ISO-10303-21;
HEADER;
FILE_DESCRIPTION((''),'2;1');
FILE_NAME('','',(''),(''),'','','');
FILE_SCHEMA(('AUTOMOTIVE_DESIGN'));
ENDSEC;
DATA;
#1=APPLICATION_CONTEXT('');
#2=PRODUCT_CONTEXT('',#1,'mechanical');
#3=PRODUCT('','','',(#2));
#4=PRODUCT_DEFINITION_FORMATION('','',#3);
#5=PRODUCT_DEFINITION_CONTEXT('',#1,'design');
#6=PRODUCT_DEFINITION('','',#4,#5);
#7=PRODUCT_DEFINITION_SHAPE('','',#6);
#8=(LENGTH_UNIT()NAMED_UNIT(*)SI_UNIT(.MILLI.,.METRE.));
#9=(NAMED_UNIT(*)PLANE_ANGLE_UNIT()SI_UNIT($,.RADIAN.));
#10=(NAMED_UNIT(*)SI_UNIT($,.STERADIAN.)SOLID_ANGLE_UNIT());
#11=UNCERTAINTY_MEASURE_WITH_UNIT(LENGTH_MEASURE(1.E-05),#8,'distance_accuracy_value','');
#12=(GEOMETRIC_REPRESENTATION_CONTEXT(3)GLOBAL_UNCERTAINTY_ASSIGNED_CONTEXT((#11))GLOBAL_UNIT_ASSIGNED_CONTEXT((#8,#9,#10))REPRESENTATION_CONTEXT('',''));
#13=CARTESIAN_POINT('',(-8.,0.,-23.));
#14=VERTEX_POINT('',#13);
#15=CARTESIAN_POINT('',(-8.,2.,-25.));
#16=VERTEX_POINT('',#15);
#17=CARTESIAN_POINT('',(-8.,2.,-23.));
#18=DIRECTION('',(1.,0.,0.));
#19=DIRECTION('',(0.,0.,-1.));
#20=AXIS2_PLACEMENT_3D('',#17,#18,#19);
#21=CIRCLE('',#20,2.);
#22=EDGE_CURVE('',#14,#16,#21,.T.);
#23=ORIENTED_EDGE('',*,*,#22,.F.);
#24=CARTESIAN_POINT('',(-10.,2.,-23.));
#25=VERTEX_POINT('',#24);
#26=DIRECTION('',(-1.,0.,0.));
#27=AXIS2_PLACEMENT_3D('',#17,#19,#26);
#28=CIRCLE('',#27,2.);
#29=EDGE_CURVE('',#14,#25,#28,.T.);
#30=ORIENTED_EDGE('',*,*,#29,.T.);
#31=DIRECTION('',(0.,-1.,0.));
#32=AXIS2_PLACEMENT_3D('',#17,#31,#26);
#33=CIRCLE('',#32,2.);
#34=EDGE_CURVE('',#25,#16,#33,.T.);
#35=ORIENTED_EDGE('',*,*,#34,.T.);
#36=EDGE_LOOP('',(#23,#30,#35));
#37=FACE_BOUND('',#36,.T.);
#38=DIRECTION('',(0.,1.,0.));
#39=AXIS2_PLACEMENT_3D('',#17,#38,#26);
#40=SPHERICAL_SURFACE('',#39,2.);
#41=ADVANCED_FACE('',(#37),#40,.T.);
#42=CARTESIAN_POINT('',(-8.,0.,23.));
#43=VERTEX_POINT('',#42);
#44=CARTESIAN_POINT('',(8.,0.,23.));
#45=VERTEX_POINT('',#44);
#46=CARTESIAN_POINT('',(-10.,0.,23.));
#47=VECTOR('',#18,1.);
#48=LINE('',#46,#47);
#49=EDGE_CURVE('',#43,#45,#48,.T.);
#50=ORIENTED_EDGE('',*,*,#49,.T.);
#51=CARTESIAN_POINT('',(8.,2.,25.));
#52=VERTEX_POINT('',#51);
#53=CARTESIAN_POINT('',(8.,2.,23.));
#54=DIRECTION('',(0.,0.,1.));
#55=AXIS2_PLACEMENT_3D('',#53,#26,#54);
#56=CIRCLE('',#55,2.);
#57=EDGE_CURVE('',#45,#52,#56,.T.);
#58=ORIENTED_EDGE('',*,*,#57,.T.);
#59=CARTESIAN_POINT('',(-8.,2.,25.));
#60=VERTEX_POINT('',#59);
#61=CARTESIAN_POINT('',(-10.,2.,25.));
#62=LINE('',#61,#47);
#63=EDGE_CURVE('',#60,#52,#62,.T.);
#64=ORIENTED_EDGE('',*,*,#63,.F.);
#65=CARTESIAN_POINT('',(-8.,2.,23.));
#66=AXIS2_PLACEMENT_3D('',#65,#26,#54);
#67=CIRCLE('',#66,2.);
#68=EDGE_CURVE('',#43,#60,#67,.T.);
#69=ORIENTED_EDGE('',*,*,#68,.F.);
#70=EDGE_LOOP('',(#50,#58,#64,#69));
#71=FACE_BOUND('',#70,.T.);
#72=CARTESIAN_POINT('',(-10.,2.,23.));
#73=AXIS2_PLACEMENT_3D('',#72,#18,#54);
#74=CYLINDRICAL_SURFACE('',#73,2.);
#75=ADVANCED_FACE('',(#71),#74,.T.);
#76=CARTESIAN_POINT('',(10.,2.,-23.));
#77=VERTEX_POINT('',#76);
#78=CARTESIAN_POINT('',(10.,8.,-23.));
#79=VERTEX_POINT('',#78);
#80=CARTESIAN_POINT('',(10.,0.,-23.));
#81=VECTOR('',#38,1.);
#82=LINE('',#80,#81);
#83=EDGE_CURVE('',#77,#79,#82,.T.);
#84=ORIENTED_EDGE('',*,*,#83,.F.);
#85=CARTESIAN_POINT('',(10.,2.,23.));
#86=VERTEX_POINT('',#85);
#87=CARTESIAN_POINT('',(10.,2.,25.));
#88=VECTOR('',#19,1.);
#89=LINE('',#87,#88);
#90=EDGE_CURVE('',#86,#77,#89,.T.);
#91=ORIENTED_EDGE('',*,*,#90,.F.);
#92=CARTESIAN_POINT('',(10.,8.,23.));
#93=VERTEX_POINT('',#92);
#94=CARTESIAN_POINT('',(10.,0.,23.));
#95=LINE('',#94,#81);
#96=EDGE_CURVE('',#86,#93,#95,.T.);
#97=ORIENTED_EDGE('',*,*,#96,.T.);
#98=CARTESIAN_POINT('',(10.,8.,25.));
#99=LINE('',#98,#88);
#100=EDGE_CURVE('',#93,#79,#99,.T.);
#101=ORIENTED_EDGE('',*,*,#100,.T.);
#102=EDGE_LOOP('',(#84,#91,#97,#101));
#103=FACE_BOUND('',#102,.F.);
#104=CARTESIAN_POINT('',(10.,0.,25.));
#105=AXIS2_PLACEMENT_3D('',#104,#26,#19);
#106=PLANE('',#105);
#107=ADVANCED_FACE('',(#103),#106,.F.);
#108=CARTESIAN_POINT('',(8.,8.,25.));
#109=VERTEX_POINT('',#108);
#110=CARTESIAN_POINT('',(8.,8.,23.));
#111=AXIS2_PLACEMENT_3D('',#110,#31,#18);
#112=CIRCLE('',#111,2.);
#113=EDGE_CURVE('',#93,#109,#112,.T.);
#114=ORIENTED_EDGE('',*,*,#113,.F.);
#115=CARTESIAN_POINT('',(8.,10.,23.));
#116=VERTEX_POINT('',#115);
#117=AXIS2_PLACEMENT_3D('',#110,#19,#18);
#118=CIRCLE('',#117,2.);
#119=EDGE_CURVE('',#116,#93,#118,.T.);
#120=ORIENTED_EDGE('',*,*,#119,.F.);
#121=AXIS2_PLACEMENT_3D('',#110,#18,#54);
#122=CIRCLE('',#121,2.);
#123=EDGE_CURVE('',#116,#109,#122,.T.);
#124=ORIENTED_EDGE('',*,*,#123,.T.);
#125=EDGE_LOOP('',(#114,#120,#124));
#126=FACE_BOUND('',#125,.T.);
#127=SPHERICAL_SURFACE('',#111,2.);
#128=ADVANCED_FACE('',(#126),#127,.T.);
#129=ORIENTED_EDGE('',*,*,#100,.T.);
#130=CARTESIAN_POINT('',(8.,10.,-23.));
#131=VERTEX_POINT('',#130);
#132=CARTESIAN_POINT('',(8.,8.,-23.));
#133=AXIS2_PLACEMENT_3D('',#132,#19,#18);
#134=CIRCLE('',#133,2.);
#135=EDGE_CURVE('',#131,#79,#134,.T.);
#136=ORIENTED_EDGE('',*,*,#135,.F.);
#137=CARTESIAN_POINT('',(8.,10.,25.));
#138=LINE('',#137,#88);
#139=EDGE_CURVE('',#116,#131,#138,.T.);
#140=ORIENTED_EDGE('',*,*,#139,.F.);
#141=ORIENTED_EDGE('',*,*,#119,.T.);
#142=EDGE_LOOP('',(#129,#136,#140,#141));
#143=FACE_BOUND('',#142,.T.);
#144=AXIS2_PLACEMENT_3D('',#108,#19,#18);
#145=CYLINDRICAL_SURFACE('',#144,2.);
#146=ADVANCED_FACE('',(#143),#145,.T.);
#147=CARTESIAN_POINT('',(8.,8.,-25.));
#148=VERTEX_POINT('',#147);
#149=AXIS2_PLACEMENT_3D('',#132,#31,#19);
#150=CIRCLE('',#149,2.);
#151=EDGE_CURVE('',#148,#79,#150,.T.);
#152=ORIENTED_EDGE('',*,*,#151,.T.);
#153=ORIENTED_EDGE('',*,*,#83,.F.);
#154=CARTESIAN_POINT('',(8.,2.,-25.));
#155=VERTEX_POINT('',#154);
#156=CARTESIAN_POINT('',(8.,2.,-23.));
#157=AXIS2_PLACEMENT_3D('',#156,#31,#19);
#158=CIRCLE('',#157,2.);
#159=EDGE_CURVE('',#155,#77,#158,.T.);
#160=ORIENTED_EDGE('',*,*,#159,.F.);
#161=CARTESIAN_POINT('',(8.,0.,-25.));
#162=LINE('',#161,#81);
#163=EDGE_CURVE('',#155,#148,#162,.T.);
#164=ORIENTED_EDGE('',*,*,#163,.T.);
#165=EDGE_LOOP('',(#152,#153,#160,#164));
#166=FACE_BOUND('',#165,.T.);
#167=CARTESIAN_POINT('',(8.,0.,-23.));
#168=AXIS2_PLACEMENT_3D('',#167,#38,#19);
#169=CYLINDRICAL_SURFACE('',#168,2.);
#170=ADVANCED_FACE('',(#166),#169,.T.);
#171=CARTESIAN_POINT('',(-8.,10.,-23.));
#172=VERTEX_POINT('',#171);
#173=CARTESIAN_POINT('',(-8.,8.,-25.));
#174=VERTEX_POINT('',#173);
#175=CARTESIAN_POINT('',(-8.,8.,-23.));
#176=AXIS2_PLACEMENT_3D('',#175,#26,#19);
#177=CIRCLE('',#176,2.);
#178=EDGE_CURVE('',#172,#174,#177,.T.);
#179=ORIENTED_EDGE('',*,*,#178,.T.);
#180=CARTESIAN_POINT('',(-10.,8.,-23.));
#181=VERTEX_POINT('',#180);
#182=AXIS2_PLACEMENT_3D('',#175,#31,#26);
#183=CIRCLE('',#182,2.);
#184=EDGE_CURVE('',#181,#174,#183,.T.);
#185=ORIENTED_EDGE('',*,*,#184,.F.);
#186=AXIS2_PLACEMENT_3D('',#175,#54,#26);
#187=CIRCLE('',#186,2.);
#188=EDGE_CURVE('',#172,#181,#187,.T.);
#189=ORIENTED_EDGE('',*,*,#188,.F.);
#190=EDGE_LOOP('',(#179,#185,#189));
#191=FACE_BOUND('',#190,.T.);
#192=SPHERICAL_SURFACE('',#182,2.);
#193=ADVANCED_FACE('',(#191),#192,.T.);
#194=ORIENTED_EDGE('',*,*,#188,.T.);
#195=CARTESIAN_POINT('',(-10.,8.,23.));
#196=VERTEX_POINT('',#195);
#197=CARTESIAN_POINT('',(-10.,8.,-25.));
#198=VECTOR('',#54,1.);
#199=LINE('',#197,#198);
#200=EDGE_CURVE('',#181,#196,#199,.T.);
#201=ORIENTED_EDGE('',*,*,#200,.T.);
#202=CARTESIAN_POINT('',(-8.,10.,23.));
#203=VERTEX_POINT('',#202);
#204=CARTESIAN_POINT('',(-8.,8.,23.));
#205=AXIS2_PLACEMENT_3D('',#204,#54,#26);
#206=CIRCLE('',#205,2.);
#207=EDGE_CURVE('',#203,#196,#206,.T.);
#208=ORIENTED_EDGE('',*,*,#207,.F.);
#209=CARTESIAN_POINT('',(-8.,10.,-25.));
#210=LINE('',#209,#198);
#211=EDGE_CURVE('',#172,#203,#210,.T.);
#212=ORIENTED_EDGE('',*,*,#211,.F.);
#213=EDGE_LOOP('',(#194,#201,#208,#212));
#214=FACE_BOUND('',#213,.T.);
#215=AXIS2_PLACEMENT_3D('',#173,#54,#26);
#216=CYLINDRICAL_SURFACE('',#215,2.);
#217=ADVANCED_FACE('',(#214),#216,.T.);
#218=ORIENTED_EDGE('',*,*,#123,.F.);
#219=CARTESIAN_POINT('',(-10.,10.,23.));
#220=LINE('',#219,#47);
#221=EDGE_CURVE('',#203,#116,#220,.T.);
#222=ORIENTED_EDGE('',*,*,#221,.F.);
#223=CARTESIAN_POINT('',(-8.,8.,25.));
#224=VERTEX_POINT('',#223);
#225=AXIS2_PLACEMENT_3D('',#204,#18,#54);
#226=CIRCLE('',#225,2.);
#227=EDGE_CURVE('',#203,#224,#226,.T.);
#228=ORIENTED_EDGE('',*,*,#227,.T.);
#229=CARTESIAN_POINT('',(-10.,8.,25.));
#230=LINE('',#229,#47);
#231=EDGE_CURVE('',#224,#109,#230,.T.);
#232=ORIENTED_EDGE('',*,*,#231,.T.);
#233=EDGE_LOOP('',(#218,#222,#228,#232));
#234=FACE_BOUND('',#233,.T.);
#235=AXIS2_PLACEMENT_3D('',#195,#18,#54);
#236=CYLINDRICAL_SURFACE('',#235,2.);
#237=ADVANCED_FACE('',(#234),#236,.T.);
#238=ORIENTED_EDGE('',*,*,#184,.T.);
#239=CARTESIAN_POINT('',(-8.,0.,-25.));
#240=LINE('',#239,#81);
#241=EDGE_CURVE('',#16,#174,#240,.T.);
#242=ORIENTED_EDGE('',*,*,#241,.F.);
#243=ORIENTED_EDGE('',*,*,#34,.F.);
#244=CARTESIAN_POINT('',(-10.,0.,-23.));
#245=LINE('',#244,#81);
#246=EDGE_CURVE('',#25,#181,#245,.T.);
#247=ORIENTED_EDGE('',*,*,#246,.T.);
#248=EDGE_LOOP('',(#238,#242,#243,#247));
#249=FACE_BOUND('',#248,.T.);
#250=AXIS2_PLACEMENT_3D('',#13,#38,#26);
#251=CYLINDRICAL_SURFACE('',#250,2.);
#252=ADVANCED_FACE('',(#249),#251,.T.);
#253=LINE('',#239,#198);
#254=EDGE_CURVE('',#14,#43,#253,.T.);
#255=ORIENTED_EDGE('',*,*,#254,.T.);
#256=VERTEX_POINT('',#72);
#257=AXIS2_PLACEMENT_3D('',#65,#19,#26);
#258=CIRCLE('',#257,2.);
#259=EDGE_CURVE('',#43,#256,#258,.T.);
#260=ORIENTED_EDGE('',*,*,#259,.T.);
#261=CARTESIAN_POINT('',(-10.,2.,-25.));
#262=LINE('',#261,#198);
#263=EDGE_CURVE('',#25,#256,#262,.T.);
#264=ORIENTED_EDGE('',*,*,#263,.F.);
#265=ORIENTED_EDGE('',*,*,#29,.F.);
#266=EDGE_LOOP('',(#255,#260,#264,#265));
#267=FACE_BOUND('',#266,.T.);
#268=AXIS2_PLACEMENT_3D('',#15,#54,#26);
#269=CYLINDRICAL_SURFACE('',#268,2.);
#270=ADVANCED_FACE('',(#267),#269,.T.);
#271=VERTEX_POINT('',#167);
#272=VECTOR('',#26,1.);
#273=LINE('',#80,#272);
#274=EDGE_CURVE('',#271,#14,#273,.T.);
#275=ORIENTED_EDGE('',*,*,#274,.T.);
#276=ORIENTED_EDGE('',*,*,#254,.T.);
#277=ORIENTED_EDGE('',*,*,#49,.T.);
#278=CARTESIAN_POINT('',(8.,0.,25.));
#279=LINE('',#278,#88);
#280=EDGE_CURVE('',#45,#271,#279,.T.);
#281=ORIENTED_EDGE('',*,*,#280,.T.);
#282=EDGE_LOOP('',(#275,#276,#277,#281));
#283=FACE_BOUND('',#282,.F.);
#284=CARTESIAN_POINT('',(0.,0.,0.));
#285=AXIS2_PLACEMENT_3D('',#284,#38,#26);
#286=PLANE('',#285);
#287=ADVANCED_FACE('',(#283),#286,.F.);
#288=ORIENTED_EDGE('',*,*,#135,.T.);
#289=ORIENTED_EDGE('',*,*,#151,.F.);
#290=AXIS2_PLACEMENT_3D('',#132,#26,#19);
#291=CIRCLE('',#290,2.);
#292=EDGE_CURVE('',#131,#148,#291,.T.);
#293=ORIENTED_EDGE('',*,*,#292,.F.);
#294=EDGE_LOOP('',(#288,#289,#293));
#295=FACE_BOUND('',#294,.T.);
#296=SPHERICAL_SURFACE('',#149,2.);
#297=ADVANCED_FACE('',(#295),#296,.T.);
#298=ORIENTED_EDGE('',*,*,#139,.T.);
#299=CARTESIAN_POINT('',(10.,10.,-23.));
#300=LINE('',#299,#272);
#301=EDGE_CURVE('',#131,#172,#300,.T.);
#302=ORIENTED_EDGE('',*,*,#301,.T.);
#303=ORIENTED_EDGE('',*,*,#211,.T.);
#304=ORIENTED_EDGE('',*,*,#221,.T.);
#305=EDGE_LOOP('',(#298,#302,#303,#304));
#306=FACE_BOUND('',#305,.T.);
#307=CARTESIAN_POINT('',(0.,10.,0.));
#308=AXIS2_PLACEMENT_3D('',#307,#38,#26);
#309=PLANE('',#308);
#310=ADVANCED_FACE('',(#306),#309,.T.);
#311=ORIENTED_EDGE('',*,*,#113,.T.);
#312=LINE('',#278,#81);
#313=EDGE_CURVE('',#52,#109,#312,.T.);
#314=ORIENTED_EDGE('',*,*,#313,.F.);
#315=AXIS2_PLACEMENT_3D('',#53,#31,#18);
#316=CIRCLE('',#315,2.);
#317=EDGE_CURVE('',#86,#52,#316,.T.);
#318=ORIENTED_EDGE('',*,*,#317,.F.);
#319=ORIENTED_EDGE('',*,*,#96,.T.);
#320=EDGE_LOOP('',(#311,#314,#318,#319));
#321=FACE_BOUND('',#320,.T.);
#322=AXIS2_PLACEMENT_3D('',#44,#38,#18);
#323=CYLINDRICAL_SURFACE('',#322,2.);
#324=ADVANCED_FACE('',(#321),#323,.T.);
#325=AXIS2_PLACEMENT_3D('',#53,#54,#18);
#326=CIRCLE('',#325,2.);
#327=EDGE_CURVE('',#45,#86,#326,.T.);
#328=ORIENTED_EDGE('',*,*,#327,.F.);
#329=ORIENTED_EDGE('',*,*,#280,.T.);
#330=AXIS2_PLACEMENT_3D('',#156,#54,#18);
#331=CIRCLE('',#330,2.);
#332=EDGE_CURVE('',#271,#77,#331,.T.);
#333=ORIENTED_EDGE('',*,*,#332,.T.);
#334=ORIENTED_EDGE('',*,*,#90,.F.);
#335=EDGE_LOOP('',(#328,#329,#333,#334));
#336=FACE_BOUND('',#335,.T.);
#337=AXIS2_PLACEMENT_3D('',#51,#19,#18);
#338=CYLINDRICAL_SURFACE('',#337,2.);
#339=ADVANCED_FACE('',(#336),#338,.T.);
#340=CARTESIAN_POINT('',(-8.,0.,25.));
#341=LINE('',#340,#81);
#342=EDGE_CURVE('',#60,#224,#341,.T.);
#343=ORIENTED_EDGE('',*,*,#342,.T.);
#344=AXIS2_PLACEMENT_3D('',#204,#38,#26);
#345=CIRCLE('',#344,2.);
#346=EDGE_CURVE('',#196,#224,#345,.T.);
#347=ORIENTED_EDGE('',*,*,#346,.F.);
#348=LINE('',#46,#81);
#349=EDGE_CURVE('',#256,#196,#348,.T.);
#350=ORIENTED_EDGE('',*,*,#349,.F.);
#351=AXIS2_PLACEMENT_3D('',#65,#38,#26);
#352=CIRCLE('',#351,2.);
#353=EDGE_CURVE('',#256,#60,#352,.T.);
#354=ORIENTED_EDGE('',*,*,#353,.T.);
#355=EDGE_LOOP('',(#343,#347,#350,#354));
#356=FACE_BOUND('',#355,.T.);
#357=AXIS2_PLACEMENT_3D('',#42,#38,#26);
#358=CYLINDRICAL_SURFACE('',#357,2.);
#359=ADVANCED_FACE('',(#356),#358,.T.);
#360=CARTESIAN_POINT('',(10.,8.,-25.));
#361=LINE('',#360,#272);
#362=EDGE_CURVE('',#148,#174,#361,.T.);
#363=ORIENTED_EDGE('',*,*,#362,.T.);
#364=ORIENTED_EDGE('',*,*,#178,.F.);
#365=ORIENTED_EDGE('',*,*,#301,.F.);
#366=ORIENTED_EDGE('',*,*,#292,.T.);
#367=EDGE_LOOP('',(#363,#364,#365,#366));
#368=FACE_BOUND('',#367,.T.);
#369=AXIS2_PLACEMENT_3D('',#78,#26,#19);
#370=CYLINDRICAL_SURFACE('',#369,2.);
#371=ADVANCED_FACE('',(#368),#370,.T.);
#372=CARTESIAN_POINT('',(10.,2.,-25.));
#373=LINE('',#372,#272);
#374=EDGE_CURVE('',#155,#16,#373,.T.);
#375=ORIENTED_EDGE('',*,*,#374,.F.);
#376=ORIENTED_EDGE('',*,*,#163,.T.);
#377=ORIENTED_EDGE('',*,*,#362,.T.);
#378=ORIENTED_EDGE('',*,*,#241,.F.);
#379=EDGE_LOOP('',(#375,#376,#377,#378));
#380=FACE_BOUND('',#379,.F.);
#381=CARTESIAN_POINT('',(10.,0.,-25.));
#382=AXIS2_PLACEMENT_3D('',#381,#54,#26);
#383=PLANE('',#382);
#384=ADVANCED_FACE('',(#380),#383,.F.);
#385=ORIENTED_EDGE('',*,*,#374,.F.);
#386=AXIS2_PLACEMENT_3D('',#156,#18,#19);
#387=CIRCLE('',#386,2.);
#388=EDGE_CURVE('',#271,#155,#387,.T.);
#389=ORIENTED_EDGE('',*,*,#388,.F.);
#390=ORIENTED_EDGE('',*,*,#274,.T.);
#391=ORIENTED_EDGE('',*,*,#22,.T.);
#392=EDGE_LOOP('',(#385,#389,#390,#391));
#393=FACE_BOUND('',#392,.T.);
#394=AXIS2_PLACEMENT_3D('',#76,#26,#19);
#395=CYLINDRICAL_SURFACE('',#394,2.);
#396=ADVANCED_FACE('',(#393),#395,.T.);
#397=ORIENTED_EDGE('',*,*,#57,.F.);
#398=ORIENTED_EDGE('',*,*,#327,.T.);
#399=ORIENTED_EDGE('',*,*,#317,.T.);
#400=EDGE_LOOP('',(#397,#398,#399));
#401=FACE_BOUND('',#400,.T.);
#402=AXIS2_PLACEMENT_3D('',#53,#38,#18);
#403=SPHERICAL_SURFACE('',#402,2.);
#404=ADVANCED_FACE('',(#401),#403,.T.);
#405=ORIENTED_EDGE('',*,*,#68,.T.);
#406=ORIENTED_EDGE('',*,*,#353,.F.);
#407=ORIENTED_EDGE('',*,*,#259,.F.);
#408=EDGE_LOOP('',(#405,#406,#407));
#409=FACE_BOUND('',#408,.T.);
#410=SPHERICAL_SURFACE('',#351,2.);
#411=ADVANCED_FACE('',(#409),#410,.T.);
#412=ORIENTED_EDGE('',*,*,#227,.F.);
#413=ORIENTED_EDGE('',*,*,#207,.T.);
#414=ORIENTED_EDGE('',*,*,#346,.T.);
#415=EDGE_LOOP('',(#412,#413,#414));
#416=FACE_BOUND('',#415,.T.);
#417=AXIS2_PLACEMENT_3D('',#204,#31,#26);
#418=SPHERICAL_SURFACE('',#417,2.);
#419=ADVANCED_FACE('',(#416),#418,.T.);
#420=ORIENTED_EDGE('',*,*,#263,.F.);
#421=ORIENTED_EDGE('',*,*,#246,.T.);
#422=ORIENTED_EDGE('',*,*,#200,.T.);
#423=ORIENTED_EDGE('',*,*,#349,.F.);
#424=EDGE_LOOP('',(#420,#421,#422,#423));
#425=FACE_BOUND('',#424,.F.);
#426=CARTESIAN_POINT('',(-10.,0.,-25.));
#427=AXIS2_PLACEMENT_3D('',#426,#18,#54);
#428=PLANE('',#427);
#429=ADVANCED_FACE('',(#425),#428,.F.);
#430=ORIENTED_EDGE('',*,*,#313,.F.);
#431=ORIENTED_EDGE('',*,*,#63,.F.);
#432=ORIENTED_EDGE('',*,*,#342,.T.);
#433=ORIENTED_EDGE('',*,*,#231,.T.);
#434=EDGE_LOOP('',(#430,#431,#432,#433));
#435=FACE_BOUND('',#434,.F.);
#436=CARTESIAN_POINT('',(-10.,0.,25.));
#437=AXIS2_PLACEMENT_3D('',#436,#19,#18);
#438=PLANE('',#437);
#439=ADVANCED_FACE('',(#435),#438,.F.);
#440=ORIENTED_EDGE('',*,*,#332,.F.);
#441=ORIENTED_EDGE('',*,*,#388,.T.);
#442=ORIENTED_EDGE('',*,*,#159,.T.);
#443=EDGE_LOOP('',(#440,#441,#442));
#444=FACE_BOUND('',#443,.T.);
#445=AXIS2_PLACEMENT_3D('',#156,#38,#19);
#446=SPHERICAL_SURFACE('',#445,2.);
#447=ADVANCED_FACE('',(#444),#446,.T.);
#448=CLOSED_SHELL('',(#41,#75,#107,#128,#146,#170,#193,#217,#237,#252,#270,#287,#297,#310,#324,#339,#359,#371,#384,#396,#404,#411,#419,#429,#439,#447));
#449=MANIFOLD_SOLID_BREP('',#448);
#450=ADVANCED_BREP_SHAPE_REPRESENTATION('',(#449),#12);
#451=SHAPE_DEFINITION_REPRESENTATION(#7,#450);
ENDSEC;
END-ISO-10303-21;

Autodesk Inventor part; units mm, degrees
ref_plane "YZ Plane" through (0, 0, 0) normal (1, 0, 0) x (0, 1, 0)
ref_plane "XZ Plane" through (0, 0, 0) normal (0, 1, 0) x (-1, 0, 0)
ref_plane "XY Plane" through (0, 0, 0) normal (0, 0, 1) x (1, 0, 0)
sketch "草图1" plane through (0, 0, 0) normal (0, 1, 0) x (-1, 0, 0)
  line L0 (10, 25) -> (-10, 25)
  line L1 (-10, 25) -> (-10, -25)
  line L2 (-10, -25) -> (10, -25)
  line L3 (10, -25) -> (10, 25)
  point P0 (0, 0)
  dimension "d0" = 20
  dimension "d1" = 50
extrude "拉伸1" add sketch "草图1" along normal blind 10
fillet "圆角1" radius 2 12 edges at (-10, 5, -25) (-10, 5, 25) (-10, 0, 0) (-10, 10, 0) (10, 5, -25) (0, 0, -25) (0, 10, -25) (10, 5, 25) (10, 0, 0) (10, 10, 0) (0, 0, 25) (0, 10, 25)
properties part number "升降板"
